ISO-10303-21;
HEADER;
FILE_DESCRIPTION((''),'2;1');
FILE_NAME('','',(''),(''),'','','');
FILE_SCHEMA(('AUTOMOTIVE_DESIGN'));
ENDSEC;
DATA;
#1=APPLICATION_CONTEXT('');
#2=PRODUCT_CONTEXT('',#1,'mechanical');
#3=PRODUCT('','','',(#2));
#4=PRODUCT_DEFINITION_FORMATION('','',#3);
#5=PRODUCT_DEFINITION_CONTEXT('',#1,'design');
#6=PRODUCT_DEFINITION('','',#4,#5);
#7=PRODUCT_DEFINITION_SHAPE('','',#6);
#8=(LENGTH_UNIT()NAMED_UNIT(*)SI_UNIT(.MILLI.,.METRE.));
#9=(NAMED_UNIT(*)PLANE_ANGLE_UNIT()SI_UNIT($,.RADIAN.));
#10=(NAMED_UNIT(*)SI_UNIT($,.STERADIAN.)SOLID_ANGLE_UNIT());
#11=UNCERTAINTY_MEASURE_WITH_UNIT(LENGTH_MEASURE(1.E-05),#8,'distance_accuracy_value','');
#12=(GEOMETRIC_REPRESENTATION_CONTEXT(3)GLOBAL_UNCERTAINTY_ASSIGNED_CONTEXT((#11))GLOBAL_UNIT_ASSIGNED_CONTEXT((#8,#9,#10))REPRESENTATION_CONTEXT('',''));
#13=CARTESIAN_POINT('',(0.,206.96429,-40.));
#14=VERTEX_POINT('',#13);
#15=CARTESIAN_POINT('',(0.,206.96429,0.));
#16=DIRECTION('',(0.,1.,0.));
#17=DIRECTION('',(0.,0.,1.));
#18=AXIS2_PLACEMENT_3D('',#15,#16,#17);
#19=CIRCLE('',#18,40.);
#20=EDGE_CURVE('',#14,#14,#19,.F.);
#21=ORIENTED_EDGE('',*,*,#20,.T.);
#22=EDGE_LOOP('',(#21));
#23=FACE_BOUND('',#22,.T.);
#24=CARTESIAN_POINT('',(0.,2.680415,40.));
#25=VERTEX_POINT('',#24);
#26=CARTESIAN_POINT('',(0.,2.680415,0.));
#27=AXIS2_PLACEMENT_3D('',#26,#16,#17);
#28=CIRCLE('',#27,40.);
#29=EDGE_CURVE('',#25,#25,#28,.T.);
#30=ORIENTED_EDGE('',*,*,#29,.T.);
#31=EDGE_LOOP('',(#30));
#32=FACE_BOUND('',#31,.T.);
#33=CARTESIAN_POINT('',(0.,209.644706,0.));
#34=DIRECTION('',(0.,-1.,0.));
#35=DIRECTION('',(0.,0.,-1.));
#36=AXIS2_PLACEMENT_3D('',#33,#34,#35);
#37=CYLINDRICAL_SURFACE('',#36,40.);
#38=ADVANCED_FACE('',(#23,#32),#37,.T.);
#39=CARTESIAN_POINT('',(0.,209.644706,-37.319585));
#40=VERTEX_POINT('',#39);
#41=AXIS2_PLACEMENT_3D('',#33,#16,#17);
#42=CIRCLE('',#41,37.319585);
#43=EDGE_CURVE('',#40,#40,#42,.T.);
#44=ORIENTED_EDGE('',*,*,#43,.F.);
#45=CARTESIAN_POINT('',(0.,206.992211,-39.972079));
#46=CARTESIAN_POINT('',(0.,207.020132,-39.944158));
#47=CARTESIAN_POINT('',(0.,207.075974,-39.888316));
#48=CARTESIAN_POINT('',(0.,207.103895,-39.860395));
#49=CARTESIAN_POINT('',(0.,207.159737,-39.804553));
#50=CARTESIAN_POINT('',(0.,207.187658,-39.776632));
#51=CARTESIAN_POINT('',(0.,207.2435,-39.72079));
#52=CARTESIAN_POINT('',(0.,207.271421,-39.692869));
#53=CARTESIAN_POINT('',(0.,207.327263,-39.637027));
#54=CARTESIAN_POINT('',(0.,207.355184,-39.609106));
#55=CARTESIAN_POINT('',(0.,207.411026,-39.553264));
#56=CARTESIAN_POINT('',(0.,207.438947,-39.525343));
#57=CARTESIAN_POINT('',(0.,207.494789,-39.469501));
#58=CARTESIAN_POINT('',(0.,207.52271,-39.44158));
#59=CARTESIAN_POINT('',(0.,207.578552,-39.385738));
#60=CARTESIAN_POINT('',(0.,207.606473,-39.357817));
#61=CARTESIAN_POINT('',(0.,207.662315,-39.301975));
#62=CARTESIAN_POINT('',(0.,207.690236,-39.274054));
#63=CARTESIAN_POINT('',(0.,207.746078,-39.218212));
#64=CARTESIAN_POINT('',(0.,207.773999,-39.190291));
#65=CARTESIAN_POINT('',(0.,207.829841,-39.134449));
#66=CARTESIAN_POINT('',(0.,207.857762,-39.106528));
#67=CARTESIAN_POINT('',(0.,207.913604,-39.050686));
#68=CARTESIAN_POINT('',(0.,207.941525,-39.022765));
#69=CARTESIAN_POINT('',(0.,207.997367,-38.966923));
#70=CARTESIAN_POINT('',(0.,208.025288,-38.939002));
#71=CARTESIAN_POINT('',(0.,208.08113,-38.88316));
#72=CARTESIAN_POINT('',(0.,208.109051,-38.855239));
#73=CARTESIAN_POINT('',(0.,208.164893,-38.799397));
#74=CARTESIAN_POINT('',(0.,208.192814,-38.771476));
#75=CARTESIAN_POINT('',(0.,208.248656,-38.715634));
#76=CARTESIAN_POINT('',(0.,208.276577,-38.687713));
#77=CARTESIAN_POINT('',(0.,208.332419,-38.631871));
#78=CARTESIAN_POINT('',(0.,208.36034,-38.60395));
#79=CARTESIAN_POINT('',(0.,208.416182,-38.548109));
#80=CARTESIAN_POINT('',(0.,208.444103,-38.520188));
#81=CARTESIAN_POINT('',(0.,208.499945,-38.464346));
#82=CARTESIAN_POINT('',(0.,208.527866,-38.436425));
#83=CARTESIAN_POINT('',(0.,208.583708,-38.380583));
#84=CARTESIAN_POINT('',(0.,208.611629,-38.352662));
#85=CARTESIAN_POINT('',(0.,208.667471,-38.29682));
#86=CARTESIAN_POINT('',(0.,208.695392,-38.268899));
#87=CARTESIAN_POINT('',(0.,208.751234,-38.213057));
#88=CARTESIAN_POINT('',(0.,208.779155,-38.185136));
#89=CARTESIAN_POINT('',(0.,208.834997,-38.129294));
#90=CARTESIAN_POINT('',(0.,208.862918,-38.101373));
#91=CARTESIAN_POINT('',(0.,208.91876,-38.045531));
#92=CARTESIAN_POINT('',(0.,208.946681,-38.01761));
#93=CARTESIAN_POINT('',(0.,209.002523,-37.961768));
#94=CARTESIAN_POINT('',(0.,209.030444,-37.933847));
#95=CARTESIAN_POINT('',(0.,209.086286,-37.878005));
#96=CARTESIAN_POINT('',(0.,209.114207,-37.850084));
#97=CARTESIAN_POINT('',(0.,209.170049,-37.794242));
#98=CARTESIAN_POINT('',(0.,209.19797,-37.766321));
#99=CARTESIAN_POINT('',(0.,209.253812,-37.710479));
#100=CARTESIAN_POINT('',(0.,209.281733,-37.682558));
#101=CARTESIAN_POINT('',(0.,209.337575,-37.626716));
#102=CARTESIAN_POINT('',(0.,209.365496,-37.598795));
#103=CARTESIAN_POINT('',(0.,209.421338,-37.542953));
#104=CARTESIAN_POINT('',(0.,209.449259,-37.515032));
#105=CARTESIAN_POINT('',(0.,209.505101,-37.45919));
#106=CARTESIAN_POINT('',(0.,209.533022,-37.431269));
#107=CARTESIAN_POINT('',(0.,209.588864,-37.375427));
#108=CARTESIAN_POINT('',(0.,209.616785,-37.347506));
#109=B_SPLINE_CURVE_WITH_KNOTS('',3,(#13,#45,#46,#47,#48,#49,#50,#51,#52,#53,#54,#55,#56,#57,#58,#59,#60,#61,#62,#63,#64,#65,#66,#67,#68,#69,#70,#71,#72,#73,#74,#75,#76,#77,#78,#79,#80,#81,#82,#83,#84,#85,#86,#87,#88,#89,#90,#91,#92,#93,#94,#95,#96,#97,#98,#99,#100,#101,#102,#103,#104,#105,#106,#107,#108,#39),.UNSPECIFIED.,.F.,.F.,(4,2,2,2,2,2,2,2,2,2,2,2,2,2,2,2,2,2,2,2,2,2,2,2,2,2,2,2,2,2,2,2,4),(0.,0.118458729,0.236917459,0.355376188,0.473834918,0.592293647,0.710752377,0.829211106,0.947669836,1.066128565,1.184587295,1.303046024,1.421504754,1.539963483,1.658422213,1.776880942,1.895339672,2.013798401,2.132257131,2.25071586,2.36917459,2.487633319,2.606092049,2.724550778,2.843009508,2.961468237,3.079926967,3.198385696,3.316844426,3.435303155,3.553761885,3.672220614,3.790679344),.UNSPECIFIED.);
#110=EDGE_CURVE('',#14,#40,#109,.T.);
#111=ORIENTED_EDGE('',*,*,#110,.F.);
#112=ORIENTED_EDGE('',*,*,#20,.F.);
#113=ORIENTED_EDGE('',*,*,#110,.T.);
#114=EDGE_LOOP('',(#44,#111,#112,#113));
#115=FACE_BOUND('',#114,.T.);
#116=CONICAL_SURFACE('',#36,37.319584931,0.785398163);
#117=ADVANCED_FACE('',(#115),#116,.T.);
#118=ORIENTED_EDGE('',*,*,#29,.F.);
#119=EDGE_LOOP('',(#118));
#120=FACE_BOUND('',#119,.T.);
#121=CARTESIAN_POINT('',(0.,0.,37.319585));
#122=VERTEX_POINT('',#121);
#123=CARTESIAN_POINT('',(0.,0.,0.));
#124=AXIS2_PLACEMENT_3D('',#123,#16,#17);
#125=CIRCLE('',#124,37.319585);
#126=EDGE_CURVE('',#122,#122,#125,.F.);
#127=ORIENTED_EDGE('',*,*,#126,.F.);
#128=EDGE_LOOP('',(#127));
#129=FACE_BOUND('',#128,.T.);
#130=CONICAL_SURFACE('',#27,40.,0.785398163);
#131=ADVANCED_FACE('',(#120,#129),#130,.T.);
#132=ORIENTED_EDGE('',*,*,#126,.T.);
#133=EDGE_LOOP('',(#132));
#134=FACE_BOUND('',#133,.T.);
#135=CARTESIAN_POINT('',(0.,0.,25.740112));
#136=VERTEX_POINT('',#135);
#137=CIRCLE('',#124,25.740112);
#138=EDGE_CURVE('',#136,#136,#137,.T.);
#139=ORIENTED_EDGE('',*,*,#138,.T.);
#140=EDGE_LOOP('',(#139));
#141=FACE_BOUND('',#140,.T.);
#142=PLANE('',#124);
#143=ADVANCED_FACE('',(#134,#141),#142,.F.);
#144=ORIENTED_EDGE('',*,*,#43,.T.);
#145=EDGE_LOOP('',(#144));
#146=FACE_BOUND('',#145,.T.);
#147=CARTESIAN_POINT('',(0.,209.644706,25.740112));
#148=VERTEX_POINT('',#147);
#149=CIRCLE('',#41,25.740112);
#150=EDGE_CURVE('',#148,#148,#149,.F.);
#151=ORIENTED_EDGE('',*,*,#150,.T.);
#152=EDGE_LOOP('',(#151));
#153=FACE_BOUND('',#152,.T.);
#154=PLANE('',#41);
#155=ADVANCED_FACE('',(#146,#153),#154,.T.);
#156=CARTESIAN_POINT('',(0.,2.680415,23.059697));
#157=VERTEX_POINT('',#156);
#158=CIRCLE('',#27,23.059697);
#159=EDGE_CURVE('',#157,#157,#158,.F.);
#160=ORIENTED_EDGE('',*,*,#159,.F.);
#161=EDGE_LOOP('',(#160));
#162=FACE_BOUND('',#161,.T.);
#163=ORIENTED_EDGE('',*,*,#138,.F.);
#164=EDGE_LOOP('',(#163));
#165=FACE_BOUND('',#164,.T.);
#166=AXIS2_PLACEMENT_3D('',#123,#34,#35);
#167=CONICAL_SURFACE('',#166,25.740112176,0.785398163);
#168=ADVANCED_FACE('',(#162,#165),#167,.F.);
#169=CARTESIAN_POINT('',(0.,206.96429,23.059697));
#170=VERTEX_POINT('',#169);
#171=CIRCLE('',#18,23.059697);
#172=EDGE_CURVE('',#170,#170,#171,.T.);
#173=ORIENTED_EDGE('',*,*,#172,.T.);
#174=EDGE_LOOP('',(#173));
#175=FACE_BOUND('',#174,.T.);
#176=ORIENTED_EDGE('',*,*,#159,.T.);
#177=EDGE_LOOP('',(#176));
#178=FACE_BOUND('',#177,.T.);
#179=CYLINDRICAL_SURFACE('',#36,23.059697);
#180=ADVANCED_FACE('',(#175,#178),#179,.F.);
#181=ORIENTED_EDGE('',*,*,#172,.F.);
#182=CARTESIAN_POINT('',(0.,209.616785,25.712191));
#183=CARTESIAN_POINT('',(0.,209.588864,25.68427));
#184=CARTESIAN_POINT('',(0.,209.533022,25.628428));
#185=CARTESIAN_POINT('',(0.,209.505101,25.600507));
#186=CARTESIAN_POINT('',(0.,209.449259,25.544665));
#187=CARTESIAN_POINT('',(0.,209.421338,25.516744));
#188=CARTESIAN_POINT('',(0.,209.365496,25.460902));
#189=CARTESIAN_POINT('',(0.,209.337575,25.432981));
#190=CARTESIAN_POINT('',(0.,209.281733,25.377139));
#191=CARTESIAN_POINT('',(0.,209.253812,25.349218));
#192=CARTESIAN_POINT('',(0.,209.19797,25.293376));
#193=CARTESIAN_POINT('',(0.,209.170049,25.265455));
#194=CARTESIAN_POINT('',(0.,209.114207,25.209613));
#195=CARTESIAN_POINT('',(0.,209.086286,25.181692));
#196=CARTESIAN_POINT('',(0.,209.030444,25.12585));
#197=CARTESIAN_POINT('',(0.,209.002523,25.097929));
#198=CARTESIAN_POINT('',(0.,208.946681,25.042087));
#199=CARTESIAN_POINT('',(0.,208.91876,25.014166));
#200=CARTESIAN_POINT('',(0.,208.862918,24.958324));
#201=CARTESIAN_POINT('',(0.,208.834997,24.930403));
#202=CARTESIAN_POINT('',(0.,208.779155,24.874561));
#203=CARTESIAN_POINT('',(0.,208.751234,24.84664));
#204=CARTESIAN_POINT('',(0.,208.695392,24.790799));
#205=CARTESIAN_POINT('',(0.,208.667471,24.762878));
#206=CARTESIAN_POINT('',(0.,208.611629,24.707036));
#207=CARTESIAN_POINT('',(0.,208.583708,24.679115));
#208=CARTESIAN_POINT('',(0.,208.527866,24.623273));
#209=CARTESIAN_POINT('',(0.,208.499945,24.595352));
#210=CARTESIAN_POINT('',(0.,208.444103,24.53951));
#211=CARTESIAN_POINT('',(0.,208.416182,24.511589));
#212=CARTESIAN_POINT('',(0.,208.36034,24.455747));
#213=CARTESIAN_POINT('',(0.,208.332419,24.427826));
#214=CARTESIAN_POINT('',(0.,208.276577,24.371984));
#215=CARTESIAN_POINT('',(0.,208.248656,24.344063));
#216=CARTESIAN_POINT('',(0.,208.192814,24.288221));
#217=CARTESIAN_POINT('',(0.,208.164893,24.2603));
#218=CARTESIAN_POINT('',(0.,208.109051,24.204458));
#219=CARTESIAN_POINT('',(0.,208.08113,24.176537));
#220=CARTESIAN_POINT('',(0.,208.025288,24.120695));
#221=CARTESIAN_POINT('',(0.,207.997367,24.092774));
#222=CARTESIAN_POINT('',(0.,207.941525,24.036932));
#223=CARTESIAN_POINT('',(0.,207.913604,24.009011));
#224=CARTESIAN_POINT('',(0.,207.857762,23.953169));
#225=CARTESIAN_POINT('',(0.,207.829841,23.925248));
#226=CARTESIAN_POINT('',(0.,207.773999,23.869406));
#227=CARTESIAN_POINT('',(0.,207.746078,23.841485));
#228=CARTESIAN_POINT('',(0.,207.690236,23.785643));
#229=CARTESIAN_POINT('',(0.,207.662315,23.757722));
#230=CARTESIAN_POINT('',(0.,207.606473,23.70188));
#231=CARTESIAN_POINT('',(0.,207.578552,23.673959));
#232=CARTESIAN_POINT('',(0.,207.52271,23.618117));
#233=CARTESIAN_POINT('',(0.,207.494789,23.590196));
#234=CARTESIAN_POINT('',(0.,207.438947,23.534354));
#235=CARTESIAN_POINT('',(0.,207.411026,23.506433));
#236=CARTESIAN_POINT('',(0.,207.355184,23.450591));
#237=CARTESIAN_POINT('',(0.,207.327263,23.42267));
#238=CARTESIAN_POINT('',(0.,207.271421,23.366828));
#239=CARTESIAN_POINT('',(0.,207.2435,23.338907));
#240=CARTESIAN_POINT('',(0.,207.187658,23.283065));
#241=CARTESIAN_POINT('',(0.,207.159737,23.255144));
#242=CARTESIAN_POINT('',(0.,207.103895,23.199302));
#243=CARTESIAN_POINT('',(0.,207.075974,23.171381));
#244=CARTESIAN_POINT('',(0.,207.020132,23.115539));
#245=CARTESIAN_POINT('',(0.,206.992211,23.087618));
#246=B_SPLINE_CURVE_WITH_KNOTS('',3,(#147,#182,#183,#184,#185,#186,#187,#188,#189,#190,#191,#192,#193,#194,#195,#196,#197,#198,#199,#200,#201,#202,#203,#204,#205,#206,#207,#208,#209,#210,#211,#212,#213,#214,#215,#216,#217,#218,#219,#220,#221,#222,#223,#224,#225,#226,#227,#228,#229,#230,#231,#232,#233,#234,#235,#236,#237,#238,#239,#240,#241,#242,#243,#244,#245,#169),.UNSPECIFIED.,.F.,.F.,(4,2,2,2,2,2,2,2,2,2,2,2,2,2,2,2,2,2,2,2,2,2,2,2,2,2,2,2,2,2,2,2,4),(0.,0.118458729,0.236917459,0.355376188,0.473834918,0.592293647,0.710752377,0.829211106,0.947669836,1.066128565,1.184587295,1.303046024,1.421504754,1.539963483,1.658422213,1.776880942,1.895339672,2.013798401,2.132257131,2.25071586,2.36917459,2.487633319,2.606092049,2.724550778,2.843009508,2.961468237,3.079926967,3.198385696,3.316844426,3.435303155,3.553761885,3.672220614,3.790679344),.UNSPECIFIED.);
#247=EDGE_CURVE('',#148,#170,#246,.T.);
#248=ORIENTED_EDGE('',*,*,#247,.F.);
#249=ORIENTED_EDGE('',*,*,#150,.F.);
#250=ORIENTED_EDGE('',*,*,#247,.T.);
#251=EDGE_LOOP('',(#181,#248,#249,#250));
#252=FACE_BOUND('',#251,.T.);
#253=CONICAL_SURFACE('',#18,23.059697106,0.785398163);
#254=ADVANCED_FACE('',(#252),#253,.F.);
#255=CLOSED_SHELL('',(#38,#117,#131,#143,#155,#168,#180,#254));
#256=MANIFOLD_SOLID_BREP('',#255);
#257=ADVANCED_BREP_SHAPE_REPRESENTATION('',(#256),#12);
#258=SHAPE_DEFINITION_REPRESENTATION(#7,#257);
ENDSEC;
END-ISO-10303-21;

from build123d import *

# Parameters (mm, degrees)
SKETCH1_R           = 40
BOSS_EXTRUDE1_DEPTH = 209.644705536
SKETCH2_R           = 23.059697106
CUT_EXTRUDE1_DEPTH  = 218.14258578
CHAMFER1_SIZE       = 2.680415069


with BuildPart() as part:
    # Sketch1 → Boss-Extrude1 (new body)
    with BuildSketch(Plane(origin=(0, 0, 0), x_dir=(1, 0, 0), z_dir=(0, 1, 0))):
        Circle(SKETCH1_R)
    extrude(amount=BOSS_EXTRUDE1_DEPTH)

    # Sketch2 → Cut-Extrude1 (cut, through all)
    with BuildSketch(Plane(origin=(0, 0, 0), x_dir=(1, 0, 0), z_dir=(0, 1, 0))):
        Circle(SKETCH2_R)
    extrude(amount=CUT_EXTRUDE1_DEPTH, mode=Mode.SUBTRACT)

    # Chamfer1
    chamfer1_edges = [part.edges().sort_by_distance(p)[0] for p in [
        (-23.059697106, 209.644705536, 0),
        (-23.059697106, 0, 0),
        (-40, 0, 0),
        (-40, 209.644705536, 0),
    ]]
    chamfer(chamfer1_edges, length=CHAMFER1_SIZE)


solid = part.part
